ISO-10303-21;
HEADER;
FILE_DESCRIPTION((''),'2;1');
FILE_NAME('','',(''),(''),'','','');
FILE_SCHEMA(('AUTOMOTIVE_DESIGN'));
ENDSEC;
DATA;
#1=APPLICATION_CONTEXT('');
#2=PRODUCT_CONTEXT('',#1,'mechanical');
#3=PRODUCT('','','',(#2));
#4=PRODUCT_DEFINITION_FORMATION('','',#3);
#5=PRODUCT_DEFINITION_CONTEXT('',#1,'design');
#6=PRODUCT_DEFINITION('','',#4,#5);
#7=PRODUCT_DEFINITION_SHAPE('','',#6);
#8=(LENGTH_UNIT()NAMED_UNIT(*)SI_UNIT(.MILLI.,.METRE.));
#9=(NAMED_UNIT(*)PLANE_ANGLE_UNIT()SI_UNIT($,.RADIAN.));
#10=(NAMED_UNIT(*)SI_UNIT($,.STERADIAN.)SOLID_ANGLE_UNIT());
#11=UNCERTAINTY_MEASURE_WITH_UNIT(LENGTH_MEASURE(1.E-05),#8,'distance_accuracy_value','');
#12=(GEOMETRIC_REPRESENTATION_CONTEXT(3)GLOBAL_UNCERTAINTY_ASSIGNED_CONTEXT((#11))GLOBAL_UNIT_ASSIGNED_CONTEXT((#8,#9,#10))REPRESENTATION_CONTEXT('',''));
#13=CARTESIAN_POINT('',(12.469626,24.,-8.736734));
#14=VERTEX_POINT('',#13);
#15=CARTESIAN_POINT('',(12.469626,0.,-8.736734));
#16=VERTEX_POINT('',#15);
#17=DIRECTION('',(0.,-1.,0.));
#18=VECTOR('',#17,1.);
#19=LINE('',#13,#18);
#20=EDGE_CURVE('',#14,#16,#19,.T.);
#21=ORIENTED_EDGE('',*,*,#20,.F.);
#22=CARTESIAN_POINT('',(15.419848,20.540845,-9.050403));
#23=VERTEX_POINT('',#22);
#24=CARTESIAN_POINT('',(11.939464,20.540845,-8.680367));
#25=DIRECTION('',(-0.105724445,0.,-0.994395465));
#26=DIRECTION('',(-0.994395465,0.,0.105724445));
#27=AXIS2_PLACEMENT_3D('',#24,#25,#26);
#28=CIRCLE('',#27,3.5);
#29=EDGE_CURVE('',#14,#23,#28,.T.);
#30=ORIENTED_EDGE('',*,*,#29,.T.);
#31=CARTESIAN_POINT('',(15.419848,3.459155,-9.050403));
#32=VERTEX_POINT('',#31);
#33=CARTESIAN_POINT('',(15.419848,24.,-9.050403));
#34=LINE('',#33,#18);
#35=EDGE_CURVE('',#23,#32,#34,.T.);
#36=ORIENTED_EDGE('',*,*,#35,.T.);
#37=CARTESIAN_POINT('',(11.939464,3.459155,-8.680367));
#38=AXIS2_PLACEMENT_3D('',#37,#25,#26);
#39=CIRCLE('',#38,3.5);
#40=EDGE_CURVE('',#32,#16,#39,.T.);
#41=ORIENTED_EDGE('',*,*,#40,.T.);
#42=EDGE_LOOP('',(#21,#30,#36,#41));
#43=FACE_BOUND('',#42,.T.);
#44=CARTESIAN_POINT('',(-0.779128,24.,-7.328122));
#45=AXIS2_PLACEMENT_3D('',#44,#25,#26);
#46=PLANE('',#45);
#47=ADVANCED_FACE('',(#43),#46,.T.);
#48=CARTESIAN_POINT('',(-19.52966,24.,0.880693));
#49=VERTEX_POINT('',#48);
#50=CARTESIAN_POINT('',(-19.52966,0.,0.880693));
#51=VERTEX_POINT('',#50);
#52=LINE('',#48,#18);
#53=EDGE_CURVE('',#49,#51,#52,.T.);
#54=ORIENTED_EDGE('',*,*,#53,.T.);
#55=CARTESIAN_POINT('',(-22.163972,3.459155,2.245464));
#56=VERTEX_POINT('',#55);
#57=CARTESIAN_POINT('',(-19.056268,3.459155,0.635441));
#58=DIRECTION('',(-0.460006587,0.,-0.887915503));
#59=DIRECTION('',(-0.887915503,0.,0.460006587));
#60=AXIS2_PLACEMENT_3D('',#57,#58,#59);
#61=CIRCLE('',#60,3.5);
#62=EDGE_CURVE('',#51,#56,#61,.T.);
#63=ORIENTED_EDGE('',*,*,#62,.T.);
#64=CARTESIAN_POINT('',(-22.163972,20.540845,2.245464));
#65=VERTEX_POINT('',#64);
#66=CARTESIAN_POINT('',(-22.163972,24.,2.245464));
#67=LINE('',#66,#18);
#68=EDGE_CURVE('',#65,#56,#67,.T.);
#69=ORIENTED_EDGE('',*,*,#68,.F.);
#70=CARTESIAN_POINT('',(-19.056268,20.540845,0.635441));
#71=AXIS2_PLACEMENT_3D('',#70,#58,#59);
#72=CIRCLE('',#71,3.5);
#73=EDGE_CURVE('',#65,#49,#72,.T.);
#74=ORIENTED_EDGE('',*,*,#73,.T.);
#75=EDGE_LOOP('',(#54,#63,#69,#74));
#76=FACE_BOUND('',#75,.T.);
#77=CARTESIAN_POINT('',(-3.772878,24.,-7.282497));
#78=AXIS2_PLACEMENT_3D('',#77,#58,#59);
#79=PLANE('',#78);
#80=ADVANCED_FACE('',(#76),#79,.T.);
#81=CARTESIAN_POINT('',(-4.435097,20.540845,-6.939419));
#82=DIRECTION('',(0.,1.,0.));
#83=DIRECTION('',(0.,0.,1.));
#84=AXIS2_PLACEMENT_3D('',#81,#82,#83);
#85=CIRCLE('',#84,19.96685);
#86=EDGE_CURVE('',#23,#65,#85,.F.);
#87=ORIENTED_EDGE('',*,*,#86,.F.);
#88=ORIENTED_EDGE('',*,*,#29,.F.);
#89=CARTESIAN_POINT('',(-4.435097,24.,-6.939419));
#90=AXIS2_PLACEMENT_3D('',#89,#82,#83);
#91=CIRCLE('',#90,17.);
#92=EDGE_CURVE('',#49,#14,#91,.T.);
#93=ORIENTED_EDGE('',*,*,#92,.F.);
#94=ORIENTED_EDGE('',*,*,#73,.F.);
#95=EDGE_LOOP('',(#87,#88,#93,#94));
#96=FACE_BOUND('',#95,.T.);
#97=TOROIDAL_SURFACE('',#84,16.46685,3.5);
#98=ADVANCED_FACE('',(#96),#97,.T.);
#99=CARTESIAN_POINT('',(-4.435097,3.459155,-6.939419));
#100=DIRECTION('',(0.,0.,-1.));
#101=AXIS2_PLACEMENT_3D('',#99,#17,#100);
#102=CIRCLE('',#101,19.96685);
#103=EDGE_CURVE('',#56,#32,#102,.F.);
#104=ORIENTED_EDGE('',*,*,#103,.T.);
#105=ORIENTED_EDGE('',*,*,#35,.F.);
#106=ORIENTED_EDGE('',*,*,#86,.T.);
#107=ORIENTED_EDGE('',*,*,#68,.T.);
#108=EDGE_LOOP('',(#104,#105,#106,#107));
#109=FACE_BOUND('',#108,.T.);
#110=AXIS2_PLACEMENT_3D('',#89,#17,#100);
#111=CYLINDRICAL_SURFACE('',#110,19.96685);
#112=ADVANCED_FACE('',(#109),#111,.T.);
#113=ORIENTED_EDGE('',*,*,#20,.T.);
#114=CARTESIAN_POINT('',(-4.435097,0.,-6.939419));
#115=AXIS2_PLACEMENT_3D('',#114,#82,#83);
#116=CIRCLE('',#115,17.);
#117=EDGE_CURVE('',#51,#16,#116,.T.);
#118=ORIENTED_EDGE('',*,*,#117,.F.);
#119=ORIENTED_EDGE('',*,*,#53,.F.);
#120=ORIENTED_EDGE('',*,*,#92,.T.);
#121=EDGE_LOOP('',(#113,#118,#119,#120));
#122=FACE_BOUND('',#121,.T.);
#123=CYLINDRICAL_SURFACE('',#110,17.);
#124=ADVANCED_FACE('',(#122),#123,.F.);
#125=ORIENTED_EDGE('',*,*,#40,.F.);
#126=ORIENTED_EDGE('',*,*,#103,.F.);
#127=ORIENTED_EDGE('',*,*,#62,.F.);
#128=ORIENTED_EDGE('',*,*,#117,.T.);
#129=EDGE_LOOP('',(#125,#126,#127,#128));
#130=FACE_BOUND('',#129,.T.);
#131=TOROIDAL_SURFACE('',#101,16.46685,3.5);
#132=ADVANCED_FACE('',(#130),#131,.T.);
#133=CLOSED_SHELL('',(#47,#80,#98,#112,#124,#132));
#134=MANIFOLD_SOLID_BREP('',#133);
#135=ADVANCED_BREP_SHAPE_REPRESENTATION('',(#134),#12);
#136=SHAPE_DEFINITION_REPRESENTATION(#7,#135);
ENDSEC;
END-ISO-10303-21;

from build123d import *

# Parameters (mm, degrees)
BOSS_EXTRUDE1_DEPTH = 24
FILLET1_R           = 3.5


with BuildPart() as part:
    # Sketch2 → Boss-Extrude1 (new body)
    with BuildSketch(Plane(origin=(0, 0, 0), x_dir=(1, 0, 0), z_dir=(0, 1, 0))):
        with BuildLine():
            ThreePointArc((11.591585182, 1.269721351), (-3.263225558, -10.020142683), (-19.529660289, -0.880693402))
            Line((-19.529660289, -0.880693402), (-19.773089177, -1.006807758))
            Line((-19.773089177, -1.006807758), (-22.163972243, -2.245463863))
            ThreePointArc((-22.163972243, -2.245463863), (0.291704356, -12.459871192), (15.531753085, 6.939418571))
            ThreePointArc((15.531753085, 6.939418571), (15.503757233, 7.996392633), (15.419848185, 9.050402694))
            Line((15.419848185, 9.050402694), (12.469626172, 8.736734142))
            ThreePointArc((12.469626172, 8.736734142), (12.517251304, 5.667453249), (12.012150504, 2.639644382))
            ThreePointArc((12.012150504, 2.639644382), (11.918925763, 2.297657269), (11.818590923, 1.957688215))
            ThreePointArc((11.818590923, 1.957688215), (11.708753165, 1.61249542), (11.591585182, 1.269721351))
        make_face()
    extrude(amount=BOSS_EXTRUDE1_DEPTH)

    # Fillet1
    # the kernel refuses this fillet: 3.5 mm, written as the material it takes off along each edge
    with BuildSketch(Plane(origin=(-4.43509674, 0, -6.939418571), x_dir=(-0.9990167342617219, 0, 0.04433468918402287), z_dir=(-0.04433468918402287, 0, -0.9990167342617219))) as fillet1_piece_1:
        with BuildLine():
            CenterArc((16.466849825, 3.45915465), FILLET1_R, 278.761897774, 81.238102226)
            Line((17, 0), (17.010663004, -0.069183093))
            ThreePointArc((17.010663004, -0.069183093), (18.483424912, -0.07), (19.966849825, -0.07))
            Line((19.966849825, -0.07), (20.036849825, 0))
            Line((20.036849825, 0), (20.036849825, 3.45915465))
            Line((20.036849825, 3.45915465), (19.966849825, 3.45915465))
        make_face()
    revolve(axis=Axis((-4.43509674, 0, -6.939418571), (0, 1, 0)), revolution_arc=208.374392147, mode=Mode.SUBTRACT)
    with BuildSketch(Plane(origin=(-4.43509674, 24, -6.939418571), x_dir=(0.85792670476254, 0, -0.5137720985566359), z_dir=(-0.5137720985566359, 0, -0.85792670476254))) as fillet1_piece_2:
        with BuildLine():
            CenterArc((16.466849825, 3.45915465), FILLET1_R, 278.761897774, 81.238102226)
            Line((19.966849825, 3.45915465), (20.036849825, 3.45915465))
            Line((20.036849825, 3.45915465), (20.036849825, 0))
            Line((20.036849825, 0), (19.966849825, -0.07))
            ThreePointArc((19.966849825, -0.07), (18.483424912, -0.07), (17.010663004, -0.069183093))
            Line((17.010663004, -0.069183093), (17, 0))
        make_face()
    revolve(axis=Axis((-4.43509674, 24, -6.939418571), (0, -1, 0)), revolution_arc=208.374392147, mode=Mode.SUBTRACT)


solid = part.part
